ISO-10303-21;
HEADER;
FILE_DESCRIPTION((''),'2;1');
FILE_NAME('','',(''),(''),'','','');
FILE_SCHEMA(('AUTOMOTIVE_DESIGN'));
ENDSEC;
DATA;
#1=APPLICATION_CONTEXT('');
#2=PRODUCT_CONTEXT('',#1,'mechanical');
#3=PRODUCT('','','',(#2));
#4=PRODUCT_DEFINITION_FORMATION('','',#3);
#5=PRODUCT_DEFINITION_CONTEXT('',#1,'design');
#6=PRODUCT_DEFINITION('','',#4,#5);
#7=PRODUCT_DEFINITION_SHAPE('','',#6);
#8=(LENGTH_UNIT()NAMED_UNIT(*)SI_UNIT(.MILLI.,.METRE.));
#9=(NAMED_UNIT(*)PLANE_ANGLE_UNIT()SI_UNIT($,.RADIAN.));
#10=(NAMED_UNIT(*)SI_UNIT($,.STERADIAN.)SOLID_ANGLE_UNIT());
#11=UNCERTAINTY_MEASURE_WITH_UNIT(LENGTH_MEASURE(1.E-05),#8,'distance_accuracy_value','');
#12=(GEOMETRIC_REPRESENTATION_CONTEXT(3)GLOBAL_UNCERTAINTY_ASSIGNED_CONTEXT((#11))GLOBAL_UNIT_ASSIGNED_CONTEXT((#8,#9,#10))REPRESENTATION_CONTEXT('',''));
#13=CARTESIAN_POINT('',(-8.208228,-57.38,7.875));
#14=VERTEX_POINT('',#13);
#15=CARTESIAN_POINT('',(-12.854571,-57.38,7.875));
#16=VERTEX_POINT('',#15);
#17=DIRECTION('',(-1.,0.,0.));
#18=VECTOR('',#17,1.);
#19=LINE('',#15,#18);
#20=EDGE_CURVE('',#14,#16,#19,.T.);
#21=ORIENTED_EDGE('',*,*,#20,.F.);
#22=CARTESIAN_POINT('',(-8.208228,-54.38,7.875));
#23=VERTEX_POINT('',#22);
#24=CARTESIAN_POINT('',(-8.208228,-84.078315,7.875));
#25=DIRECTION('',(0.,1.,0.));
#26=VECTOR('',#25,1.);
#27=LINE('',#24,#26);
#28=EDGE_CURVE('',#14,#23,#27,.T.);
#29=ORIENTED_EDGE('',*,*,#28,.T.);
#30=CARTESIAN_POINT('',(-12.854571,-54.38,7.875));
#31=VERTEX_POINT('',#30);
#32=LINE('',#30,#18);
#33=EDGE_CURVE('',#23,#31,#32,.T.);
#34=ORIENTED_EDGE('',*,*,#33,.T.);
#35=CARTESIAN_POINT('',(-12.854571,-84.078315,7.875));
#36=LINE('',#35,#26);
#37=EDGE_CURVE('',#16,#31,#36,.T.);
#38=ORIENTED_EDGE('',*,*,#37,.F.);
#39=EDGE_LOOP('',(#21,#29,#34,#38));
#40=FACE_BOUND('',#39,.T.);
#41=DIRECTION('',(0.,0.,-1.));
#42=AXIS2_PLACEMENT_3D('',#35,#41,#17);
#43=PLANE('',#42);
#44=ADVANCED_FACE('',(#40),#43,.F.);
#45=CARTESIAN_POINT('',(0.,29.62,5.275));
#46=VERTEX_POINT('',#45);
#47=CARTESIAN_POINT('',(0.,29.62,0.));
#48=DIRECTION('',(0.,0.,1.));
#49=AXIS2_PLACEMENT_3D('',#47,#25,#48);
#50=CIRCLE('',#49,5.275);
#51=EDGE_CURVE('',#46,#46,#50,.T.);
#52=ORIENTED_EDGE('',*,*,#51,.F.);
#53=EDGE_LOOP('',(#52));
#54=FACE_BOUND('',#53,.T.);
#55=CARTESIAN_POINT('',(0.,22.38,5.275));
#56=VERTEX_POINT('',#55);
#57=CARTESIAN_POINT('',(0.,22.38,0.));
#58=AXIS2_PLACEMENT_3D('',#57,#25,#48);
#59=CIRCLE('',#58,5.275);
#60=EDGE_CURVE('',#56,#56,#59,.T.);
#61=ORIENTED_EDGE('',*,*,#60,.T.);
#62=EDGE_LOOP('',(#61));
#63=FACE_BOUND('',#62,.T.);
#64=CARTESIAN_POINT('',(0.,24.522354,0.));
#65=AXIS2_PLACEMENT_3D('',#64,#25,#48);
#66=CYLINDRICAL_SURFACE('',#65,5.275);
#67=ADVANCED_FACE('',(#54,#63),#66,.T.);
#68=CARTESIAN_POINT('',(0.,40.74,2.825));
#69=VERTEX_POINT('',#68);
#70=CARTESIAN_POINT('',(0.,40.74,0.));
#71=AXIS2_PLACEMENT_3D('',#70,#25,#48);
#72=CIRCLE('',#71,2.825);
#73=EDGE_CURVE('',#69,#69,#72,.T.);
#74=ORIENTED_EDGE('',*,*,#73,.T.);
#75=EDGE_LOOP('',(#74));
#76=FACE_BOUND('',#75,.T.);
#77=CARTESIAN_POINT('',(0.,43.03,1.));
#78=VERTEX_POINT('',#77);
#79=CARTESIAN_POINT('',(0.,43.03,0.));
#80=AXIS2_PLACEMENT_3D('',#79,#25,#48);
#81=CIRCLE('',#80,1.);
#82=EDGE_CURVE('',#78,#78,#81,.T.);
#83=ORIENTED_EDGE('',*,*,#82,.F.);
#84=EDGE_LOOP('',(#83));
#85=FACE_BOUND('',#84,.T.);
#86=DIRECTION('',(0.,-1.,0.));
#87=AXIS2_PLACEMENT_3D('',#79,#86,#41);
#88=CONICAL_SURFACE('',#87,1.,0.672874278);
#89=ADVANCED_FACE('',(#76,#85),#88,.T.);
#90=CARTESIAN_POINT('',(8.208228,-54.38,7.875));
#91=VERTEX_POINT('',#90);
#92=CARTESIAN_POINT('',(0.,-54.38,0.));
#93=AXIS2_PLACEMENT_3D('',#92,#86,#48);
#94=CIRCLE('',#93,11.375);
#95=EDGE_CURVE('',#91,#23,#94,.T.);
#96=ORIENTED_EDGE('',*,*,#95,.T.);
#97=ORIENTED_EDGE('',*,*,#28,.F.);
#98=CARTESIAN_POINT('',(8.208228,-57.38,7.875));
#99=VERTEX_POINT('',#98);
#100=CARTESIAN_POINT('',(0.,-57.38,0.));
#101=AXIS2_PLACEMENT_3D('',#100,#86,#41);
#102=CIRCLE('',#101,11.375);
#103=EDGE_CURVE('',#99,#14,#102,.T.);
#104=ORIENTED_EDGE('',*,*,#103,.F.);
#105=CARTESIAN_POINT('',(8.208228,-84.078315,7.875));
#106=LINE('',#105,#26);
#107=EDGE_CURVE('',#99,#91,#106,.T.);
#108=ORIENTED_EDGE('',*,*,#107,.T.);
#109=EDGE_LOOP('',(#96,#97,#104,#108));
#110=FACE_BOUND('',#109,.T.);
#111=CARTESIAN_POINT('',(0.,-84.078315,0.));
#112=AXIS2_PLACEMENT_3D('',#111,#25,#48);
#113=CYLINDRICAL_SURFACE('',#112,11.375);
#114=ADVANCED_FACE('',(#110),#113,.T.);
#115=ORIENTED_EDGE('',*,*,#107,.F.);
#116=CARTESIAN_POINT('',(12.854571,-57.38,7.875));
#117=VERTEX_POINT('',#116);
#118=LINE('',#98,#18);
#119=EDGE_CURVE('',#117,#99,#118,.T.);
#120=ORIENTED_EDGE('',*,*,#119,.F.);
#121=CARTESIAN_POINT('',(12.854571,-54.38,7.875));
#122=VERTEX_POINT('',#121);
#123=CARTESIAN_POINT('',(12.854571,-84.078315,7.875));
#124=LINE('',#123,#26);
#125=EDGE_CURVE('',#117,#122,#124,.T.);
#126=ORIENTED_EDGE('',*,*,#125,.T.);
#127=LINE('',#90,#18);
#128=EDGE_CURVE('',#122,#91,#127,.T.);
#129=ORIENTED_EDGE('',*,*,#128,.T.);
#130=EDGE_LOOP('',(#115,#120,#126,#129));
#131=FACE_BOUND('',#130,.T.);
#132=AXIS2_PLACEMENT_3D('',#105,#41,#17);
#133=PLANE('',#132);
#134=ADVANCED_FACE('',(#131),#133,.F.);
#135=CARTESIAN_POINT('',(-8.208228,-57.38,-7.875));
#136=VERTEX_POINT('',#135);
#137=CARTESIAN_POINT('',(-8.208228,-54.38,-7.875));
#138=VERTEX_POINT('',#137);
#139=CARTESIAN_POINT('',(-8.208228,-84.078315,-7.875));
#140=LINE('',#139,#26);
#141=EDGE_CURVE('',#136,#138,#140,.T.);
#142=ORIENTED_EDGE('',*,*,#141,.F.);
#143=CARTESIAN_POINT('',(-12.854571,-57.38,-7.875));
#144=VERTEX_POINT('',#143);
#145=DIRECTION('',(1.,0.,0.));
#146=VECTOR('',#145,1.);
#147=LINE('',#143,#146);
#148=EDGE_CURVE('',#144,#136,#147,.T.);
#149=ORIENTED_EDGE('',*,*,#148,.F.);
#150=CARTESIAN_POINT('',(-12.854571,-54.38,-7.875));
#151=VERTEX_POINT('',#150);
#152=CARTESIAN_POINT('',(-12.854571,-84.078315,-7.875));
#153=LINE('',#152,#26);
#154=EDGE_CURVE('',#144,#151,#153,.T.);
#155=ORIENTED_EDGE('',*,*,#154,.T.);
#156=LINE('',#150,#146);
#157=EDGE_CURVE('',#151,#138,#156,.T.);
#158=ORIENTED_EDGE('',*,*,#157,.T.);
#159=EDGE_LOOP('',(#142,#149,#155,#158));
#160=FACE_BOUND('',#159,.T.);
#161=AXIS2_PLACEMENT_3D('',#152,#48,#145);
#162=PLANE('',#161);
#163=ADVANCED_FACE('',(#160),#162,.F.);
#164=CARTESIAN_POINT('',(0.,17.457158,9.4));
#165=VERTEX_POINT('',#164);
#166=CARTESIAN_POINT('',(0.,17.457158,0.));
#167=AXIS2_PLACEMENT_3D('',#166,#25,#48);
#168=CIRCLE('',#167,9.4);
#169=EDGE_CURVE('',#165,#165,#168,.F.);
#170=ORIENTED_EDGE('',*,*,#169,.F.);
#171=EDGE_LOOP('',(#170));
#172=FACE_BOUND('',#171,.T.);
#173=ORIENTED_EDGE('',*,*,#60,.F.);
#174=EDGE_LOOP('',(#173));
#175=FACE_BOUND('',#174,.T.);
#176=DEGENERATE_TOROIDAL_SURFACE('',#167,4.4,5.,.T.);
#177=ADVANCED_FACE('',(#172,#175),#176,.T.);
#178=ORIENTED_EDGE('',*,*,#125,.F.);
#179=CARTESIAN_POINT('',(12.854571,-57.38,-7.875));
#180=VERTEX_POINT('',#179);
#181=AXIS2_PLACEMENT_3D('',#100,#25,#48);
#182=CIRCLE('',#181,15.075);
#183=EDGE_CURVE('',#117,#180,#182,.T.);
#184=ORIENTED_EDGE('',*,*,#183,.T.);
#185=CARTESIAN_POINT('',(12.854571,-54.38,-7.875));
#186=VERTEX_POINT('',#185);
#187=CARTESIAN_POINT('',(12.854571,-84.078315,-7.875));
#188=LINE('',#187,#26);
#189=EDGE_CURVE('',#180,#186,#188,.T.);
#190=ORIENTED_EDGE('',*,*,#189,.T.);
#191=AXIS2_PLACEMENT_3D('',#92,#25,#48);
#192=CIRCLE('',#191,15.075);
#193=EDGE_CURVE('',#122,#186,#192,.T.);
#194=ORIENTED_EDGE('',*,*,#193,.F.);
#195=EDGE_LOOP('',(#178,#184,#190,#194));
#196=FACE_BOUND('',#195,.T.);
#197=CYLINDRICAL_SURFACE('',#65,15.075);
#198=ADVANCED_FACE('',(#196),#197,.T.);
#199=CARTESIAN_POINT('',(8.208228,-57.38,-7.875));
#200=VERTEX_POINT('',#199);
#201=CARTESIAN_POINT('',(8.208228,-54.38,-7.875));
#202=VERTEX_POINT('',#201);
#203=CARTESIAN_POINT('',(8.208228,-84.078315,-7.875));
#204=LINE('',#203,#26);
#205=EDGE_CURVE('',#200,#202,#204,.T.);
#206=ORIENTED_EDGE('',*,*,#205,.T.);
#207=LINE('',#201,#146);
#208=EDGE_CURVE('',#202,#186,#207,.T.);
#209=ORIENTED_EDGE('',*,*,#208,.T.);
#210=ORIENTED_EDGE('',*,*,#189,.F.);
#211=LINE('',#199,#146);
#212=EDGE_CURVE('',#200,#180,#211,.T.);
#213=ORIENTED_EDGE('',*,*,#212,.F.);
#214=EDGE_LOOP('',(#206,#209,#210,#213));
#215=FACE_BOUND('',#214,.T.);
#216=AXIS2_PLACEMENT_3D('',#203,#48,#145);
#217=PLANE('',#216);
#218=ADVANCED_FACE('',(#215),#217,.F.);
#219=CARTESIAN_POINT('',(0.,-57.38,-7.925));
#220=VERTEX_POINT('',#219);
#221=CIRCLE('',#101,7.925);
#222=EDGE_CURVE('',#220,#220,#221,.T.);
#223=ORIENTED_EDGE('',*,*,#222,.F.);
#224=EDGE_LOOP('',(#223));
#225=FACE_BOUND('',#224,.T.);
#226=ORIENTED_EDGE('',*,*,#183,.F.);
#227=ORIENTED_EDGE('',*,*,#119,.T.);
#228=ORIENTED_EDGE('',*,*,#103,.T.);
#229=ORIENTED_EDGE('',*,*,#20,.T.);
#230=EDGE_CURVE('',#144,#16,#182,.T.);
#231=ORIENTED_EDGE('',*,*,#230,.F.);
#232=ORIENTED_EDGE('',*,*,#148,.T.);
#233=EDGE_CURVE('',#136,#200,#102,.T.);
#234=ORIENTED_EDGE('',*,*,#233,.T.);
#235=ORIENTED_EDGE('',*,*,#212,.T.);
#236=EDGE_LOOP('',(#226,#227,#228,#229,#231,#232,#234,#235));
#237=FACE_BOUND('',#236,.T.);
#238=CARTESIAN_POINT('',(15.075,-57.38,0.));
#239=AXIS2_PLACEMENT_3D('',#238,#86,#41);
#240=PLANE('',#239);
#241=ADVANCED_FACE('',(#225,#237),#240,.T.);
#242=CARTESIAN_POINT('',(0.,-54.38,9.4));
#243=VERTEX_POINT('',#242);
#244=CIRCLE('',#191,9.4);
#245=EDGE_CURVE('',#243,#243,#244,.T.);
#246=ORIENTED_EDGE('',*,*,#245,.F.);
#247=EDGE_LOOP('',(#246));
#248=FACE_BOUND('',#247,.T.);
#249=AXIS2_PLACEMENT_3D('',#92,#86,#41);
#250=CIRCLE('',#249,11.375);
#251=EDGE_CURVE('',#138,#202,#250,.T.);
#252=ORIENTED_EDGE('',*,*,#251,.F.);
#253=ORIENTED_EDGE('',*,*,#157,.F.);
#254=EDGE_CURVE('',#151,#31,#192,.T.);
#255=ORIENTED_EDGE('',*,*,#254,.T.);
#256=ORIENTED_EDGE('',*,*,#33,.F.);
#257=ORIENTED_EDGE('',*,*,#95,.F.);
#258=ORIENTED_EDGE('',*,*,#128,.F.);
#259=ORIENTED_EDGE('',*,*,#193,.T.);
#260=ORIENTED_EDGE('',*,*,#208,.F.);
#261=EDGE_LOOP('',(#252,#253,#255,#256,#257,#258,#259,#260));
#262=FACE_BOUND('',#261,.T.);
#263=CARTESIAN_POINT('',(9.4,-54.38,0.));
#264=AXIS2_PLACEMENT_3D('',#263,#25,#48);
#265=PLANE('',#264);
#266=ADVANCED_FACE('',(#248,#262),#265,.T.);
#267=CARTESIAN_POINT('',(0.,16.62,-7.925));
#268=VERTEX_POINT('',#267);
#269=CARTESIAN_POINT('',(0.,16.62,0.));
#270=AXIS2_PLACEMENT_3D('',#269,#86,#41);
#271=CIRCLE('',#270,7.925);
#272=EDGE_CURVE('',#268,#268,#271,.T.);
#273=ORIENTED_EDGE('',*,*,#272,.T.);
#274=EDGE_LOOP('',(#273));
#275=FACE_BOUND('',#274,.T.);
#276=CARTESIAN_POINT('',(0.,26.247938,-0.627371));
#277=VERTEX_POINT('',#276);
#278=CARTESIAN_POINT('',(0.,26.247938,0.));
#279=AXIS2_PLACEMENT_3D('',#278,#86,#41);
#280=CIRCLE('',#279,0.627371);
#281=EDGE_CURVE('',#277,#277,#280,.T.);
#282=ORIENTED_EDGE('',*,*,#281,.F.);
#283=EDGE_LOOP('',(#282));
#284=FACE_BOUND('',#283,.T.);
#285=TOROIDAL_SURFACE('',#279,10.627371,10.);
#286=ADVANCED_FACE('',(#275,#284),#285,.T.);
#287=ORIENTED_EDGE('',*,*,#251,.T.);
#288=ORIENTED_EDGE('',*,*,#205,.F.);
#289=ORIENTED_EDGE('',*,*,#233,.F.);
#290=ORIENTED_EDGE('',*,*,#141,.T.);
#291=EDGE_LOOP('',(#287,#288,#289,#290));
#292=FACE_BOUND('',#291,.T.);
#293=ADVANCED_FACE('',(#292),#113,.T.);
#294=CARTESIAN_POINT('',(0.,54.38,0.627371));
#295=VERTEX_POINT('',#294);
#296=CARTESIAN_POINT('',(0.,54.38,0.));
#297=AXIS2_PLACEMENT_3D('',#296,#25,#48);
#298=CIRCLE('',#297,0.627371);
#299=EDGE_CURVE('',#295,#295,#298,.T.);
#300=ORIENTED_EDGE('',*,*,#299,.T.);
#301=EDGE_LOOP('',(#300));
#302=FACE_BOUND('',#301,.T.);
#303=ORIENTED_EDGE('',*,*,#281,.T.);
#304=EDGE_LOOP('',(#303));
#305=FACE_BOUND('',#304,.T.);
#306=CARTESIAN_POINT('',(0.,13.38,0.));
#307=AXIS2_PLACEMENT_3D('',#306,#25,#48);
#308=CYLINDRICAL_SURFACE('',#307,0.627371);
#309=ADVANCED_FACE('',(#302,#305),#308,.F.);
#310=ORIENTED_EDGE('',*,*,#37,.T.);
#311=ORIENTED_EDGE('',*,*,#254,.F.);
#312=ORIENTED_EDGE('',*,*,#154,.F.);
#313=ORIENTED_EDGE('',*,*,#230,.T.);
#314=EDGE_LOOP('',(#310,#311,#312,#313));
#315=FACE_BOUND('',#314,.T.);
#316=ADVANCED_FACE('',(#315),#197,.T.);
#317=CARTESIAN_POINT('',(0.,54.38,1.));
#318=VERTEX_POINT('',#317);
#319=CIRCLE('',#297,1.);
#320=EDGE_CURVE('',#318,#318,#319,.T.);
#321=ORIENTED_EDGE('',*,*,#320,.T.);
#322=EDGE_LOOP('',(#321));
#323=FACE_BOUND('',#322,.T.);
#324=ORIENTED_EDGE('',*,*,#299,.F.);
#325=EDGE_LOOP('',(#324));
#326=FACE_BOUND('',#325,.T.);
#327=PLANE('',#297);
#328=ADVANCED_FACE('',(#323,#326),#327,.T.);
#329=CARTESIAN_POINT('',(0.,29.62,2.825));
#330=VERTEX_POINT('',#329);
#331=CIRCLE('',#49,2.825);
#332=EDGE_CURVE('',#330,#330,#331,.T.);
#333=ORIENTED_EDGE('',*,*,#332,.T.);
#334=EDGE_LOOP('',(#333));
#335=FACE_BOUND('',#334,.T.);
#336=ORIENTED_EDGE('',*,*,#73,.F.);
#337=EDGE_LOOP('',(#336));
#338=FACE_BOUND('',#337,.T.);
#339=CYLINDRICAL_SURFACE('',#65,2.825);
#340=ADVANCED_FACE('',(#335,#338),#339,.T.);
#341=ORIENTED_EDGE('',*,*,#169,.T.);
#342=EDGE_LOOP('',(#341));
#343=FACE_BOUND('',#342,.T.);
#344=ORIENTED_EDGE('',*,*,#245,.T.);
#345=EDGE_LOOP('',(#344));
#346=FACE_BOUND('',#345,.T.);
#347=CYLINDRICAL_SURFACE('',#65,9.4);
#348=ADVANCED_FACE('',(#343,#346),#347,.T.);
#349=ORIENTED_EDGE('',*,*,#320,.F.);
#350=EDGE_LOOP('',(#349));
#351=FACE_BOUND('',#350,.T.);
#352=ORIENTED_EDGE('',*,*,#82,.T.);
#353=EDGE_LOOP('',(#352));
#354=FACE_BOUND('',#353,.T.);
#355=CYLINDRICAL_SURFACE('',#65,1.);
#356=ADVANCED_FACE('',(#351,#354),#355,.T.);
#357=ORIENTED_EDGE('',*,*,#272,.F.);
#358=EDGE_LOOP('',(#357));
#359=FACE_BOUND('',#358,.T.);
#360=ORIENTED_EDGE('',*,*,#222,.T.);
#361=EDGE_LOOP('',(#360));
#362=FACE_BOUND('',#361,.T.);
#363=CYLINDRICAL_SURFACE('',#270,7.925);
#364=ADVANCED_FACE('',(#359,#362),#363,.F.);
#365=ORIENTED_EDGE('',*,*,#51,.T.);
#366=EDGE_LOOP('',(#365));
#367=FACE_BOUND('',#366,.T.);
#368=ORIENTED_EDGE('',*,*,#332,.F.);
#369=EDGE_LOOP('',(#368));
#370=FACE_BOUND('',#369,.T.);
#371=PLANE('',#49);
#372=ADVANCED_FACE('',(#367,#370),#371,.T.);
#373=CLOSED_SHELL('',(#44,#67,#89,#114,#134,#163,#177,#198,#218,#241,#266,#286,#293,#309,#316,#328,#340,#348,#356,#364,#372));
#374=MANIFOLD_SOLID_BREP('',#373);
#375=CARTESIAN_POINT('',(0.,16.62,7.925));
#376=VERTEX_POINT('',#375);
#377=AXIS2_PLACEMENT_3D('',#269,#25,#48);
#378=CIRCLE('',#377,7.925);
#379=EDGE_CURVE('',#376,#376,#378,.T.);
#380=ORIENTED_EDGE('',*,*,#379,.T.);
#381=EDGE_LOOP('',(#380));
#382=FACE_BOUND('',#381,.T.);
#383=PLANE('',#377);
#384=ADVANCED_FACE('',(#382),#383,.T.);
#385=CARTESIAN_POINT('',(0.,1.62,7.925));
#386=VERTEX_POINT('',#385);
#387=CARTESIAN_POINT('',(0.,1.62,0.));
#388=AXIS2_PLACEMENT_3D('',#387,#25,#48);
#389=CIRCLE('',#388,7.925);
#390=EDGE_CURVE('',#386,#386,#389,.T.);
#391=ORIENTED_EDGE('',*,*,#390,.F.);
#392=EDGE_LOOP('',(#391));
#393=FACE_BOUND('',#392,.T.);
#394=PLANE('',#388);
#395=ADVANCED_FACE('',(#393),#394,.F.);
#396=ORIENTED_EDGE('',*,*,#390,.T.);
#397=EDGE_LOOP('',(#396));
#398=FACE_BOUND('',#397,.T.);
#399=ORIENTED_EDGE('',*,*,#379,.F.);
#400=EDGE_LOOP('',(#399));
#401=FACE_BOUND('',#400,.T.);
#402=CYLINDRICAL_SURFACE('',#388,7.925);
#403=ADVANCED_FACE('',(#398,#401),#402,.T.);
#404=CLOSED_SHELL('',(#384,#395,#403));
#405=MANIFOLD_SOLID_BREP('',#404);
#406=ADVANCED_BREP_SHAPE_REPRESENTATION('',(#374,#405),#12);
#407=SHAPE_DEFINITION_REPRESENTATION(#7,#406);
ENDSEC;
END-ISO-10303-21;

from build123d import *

# Parameters (mm, degrees)
FILLET1_R           = 5
CUT_EXTRUDE1_DEPTH  = 3
SKETCH4_R           = 7.925
CUT_EXTRUDE2_DEPTH  = 74.00000000000003
SKETCH5_R           = 0.6273709550774836
CUT_EXTRUDE3_DEPTH  = 41.000000000000014
FILLET3_R           = 10
SKETCH6_R           = 7.925
BOSS_EXTRUDE2_DEPTH = 14.999999999999993


with BuildPart() as part:
    # Sketch2 → Revolve1 (revolve)
    with BuildSketch(Plane.XY, mode=Mode.PRIVATE) as revolve1_sk:
        Polygon((1.0000000000000129, 54.38), (1.27e-14, 54.38), (1.27e-14, -54.38), (1.041e-14, -57.38000000000001), (15.075000000000014, -57.38000000000001), (15.075000000000014, -54.38), (9.400000000000002, -54.38), (9.399999999999997, 22.380000000000003), (5.275000000000004, 22.380000000000003), (5.275000000000002, 29.620000000000005), (2.8250000000000037, 29.620000000000005), (2.825000000000002, 40.74), (1.0000000000000142, 43.03000000000001), align=None)
    revolve(revolve1_sk.sketch.rotate(Axis((0, 24.52235384982656, 0), (0, -1, 0)), 90), axis=Axis((0, 24.52235384982656, 0), (0, -1, 0)))

    # Fillet1
    # the kernel refuses this fillet: 5 mm, written as the material it takes off along each edge
    with BuildSketch(Plane(origin=(0, 22.380000000000003, 0), x_dir=(1.1e-16, 0, 1), z_dir=(1, 0, -1.1e-16))) as fillet1_piece_1:
        with BuildLine():
            CenterArc((4.400000000000002, 4.922842166879796), FILLET1_R, 280.0786581077857, 79.92134189221429)
            Line((5.274999999999833, 9.6279e-13), (5.29249999999983, -0.09845684333661353))
            ThreePointArc((5.29249999999983, -0.09845684333661353), (7.337499999999915, -0.10000000000000142), (9.399999999999997, -0.10000000000000142))
            Line((9.399999999999997, -0.10000000000000142), (9.499999999999996, 0))
            Line((9.499999999999996, 0), (9.500000000000002, 4.922842166879796))
            Line((9.500000000000002, 4.922842166879796), (9.400000000000002, 4.922842166879796))
        make_face()
    revolve(axis=Axis((0, 22.380000000000003, 0), (0, -1, 0)), mode=Mode.SUBTRACT)

    # Sketch3 → Cut-Extrude1 (cut)
    with BuildSketch(Plane(origin=(0, -54.38, 0), x_dir=(1, 0, 0), z_dir=(0, 1, 0))):
        with BuildLine():
            Line((-12.854571171377145, 7.875), (-8.208227579691002, 7.875))
            ThreePointArc((-8.208227579691002, 7.875), (7e-16, 11.375), (8.208227579691002, 7.875))
            Line((8.208227579691002, 7.875), (12.854571171377145, 7.875))
            ThreePointArc((12.854571171377145, 7.875), (9.2e-16, 15.075000000000014), (-12.854571171377145, 7.875))
        make_face()
        with BuildLine():
            Line((-12.854571171377145, -7.875), (-8.208227579691002, -7.875))
            ThreePointArc((-8.208227579691002, -7.875), (7e-16, -11.375), (8.208227579691002, -7.875))
            Line((8.208227579691002, -7.875), (12.854571171377145, -7.875))
            ThreePointArc((12.854571171377145, -7.875), (9.2e-16, -15.075000000000014), (-12.854571171377145, -7.875))
        make_face()
    extrude(amount=-CUT_EXTRUDE1_DEPTH, mode=Mode.SUBTRACT)

    # Sketch4 → Cut-Extrude2 (cut)
    with BuildSketch(Plane.XZ.offset(57.38000000000001)):
        with Locations(Location((0, 0, 0), (0, 0, 270))):
            Circle(SKETCH4_R)
    extrude(amount=-CUT_EXTRUDE2_DEPTH, mode=Mode.SUBTRACT)

    # Sketch5 → Cut-Extrude3 (cut)
    with BuildSketch(Plane(origin=(0, 54.38, 0), x_dir=(1, 0, 0), z_dir=(0, 1, 0))):
        with Locations(Location((0, 0, 0), (0, 0, 270))):
            Circle(SKETCH5_R)
    extrude(amount=-CUT_EXTRUDE3_DEPTH, mode=Mode.SUBTRACT)

    # Fillet3
    # the kernel refuses this fillet: 10 mm, written as the material it takes off along each edge
    with BuildSketch(Plane(origin=(0, 16.62000000000002, 0), x_dir=(-1.8e-16, 0, 1), z_dir=(-1, 0, -1.8e-16))) as fillet3_piece_1:
        with BuildLine():
            CenterArc((10.627370955077483, 9.627938056570244), FILLET3_R, 180, 74.32162410207388)
            Line((7.925, 0), (7.87095258089845, -0.19255876113140502))
            ThreePointArc((7.87095258089845, -0.19255876113140502), (4.276185477538742, -0.1999999999999993), (0.6273709550774836, -0.1999999999999993))
            Line((0.6273709550774836, -0.1999999999999993), (0.4273709550774836, 0))
            Line((0.4273709550774836, 0), (0.42737095507748285, 9.627938056570244))
            Line((0.42737095507748285, 9.627938056570244), (0.6273709550774829, 9.627938056570244))
        make_face()
    revolve(axis=Axis((0, 16.62000000000002, 0), (0, 1, 0)), mode=Mode.SUBTRACT)


with BuildPart() as body_2:
    # Sketch6 → Boss-Extrude2 (new body)
    with BuildSketch(Plane(origin=(0, 16.620000000000015, 0), x_dir=(1, 0, 0), z_dir=(0, 1, 0))):
        with Locations(Location((0, 0, 0), (0, 0, 270))):
            Circle(SKETCH6_R)
    extrude(amount=-BOSS_EXTRUDE2_DEPTH)


solid = Compound([part.part, body_2.part])
